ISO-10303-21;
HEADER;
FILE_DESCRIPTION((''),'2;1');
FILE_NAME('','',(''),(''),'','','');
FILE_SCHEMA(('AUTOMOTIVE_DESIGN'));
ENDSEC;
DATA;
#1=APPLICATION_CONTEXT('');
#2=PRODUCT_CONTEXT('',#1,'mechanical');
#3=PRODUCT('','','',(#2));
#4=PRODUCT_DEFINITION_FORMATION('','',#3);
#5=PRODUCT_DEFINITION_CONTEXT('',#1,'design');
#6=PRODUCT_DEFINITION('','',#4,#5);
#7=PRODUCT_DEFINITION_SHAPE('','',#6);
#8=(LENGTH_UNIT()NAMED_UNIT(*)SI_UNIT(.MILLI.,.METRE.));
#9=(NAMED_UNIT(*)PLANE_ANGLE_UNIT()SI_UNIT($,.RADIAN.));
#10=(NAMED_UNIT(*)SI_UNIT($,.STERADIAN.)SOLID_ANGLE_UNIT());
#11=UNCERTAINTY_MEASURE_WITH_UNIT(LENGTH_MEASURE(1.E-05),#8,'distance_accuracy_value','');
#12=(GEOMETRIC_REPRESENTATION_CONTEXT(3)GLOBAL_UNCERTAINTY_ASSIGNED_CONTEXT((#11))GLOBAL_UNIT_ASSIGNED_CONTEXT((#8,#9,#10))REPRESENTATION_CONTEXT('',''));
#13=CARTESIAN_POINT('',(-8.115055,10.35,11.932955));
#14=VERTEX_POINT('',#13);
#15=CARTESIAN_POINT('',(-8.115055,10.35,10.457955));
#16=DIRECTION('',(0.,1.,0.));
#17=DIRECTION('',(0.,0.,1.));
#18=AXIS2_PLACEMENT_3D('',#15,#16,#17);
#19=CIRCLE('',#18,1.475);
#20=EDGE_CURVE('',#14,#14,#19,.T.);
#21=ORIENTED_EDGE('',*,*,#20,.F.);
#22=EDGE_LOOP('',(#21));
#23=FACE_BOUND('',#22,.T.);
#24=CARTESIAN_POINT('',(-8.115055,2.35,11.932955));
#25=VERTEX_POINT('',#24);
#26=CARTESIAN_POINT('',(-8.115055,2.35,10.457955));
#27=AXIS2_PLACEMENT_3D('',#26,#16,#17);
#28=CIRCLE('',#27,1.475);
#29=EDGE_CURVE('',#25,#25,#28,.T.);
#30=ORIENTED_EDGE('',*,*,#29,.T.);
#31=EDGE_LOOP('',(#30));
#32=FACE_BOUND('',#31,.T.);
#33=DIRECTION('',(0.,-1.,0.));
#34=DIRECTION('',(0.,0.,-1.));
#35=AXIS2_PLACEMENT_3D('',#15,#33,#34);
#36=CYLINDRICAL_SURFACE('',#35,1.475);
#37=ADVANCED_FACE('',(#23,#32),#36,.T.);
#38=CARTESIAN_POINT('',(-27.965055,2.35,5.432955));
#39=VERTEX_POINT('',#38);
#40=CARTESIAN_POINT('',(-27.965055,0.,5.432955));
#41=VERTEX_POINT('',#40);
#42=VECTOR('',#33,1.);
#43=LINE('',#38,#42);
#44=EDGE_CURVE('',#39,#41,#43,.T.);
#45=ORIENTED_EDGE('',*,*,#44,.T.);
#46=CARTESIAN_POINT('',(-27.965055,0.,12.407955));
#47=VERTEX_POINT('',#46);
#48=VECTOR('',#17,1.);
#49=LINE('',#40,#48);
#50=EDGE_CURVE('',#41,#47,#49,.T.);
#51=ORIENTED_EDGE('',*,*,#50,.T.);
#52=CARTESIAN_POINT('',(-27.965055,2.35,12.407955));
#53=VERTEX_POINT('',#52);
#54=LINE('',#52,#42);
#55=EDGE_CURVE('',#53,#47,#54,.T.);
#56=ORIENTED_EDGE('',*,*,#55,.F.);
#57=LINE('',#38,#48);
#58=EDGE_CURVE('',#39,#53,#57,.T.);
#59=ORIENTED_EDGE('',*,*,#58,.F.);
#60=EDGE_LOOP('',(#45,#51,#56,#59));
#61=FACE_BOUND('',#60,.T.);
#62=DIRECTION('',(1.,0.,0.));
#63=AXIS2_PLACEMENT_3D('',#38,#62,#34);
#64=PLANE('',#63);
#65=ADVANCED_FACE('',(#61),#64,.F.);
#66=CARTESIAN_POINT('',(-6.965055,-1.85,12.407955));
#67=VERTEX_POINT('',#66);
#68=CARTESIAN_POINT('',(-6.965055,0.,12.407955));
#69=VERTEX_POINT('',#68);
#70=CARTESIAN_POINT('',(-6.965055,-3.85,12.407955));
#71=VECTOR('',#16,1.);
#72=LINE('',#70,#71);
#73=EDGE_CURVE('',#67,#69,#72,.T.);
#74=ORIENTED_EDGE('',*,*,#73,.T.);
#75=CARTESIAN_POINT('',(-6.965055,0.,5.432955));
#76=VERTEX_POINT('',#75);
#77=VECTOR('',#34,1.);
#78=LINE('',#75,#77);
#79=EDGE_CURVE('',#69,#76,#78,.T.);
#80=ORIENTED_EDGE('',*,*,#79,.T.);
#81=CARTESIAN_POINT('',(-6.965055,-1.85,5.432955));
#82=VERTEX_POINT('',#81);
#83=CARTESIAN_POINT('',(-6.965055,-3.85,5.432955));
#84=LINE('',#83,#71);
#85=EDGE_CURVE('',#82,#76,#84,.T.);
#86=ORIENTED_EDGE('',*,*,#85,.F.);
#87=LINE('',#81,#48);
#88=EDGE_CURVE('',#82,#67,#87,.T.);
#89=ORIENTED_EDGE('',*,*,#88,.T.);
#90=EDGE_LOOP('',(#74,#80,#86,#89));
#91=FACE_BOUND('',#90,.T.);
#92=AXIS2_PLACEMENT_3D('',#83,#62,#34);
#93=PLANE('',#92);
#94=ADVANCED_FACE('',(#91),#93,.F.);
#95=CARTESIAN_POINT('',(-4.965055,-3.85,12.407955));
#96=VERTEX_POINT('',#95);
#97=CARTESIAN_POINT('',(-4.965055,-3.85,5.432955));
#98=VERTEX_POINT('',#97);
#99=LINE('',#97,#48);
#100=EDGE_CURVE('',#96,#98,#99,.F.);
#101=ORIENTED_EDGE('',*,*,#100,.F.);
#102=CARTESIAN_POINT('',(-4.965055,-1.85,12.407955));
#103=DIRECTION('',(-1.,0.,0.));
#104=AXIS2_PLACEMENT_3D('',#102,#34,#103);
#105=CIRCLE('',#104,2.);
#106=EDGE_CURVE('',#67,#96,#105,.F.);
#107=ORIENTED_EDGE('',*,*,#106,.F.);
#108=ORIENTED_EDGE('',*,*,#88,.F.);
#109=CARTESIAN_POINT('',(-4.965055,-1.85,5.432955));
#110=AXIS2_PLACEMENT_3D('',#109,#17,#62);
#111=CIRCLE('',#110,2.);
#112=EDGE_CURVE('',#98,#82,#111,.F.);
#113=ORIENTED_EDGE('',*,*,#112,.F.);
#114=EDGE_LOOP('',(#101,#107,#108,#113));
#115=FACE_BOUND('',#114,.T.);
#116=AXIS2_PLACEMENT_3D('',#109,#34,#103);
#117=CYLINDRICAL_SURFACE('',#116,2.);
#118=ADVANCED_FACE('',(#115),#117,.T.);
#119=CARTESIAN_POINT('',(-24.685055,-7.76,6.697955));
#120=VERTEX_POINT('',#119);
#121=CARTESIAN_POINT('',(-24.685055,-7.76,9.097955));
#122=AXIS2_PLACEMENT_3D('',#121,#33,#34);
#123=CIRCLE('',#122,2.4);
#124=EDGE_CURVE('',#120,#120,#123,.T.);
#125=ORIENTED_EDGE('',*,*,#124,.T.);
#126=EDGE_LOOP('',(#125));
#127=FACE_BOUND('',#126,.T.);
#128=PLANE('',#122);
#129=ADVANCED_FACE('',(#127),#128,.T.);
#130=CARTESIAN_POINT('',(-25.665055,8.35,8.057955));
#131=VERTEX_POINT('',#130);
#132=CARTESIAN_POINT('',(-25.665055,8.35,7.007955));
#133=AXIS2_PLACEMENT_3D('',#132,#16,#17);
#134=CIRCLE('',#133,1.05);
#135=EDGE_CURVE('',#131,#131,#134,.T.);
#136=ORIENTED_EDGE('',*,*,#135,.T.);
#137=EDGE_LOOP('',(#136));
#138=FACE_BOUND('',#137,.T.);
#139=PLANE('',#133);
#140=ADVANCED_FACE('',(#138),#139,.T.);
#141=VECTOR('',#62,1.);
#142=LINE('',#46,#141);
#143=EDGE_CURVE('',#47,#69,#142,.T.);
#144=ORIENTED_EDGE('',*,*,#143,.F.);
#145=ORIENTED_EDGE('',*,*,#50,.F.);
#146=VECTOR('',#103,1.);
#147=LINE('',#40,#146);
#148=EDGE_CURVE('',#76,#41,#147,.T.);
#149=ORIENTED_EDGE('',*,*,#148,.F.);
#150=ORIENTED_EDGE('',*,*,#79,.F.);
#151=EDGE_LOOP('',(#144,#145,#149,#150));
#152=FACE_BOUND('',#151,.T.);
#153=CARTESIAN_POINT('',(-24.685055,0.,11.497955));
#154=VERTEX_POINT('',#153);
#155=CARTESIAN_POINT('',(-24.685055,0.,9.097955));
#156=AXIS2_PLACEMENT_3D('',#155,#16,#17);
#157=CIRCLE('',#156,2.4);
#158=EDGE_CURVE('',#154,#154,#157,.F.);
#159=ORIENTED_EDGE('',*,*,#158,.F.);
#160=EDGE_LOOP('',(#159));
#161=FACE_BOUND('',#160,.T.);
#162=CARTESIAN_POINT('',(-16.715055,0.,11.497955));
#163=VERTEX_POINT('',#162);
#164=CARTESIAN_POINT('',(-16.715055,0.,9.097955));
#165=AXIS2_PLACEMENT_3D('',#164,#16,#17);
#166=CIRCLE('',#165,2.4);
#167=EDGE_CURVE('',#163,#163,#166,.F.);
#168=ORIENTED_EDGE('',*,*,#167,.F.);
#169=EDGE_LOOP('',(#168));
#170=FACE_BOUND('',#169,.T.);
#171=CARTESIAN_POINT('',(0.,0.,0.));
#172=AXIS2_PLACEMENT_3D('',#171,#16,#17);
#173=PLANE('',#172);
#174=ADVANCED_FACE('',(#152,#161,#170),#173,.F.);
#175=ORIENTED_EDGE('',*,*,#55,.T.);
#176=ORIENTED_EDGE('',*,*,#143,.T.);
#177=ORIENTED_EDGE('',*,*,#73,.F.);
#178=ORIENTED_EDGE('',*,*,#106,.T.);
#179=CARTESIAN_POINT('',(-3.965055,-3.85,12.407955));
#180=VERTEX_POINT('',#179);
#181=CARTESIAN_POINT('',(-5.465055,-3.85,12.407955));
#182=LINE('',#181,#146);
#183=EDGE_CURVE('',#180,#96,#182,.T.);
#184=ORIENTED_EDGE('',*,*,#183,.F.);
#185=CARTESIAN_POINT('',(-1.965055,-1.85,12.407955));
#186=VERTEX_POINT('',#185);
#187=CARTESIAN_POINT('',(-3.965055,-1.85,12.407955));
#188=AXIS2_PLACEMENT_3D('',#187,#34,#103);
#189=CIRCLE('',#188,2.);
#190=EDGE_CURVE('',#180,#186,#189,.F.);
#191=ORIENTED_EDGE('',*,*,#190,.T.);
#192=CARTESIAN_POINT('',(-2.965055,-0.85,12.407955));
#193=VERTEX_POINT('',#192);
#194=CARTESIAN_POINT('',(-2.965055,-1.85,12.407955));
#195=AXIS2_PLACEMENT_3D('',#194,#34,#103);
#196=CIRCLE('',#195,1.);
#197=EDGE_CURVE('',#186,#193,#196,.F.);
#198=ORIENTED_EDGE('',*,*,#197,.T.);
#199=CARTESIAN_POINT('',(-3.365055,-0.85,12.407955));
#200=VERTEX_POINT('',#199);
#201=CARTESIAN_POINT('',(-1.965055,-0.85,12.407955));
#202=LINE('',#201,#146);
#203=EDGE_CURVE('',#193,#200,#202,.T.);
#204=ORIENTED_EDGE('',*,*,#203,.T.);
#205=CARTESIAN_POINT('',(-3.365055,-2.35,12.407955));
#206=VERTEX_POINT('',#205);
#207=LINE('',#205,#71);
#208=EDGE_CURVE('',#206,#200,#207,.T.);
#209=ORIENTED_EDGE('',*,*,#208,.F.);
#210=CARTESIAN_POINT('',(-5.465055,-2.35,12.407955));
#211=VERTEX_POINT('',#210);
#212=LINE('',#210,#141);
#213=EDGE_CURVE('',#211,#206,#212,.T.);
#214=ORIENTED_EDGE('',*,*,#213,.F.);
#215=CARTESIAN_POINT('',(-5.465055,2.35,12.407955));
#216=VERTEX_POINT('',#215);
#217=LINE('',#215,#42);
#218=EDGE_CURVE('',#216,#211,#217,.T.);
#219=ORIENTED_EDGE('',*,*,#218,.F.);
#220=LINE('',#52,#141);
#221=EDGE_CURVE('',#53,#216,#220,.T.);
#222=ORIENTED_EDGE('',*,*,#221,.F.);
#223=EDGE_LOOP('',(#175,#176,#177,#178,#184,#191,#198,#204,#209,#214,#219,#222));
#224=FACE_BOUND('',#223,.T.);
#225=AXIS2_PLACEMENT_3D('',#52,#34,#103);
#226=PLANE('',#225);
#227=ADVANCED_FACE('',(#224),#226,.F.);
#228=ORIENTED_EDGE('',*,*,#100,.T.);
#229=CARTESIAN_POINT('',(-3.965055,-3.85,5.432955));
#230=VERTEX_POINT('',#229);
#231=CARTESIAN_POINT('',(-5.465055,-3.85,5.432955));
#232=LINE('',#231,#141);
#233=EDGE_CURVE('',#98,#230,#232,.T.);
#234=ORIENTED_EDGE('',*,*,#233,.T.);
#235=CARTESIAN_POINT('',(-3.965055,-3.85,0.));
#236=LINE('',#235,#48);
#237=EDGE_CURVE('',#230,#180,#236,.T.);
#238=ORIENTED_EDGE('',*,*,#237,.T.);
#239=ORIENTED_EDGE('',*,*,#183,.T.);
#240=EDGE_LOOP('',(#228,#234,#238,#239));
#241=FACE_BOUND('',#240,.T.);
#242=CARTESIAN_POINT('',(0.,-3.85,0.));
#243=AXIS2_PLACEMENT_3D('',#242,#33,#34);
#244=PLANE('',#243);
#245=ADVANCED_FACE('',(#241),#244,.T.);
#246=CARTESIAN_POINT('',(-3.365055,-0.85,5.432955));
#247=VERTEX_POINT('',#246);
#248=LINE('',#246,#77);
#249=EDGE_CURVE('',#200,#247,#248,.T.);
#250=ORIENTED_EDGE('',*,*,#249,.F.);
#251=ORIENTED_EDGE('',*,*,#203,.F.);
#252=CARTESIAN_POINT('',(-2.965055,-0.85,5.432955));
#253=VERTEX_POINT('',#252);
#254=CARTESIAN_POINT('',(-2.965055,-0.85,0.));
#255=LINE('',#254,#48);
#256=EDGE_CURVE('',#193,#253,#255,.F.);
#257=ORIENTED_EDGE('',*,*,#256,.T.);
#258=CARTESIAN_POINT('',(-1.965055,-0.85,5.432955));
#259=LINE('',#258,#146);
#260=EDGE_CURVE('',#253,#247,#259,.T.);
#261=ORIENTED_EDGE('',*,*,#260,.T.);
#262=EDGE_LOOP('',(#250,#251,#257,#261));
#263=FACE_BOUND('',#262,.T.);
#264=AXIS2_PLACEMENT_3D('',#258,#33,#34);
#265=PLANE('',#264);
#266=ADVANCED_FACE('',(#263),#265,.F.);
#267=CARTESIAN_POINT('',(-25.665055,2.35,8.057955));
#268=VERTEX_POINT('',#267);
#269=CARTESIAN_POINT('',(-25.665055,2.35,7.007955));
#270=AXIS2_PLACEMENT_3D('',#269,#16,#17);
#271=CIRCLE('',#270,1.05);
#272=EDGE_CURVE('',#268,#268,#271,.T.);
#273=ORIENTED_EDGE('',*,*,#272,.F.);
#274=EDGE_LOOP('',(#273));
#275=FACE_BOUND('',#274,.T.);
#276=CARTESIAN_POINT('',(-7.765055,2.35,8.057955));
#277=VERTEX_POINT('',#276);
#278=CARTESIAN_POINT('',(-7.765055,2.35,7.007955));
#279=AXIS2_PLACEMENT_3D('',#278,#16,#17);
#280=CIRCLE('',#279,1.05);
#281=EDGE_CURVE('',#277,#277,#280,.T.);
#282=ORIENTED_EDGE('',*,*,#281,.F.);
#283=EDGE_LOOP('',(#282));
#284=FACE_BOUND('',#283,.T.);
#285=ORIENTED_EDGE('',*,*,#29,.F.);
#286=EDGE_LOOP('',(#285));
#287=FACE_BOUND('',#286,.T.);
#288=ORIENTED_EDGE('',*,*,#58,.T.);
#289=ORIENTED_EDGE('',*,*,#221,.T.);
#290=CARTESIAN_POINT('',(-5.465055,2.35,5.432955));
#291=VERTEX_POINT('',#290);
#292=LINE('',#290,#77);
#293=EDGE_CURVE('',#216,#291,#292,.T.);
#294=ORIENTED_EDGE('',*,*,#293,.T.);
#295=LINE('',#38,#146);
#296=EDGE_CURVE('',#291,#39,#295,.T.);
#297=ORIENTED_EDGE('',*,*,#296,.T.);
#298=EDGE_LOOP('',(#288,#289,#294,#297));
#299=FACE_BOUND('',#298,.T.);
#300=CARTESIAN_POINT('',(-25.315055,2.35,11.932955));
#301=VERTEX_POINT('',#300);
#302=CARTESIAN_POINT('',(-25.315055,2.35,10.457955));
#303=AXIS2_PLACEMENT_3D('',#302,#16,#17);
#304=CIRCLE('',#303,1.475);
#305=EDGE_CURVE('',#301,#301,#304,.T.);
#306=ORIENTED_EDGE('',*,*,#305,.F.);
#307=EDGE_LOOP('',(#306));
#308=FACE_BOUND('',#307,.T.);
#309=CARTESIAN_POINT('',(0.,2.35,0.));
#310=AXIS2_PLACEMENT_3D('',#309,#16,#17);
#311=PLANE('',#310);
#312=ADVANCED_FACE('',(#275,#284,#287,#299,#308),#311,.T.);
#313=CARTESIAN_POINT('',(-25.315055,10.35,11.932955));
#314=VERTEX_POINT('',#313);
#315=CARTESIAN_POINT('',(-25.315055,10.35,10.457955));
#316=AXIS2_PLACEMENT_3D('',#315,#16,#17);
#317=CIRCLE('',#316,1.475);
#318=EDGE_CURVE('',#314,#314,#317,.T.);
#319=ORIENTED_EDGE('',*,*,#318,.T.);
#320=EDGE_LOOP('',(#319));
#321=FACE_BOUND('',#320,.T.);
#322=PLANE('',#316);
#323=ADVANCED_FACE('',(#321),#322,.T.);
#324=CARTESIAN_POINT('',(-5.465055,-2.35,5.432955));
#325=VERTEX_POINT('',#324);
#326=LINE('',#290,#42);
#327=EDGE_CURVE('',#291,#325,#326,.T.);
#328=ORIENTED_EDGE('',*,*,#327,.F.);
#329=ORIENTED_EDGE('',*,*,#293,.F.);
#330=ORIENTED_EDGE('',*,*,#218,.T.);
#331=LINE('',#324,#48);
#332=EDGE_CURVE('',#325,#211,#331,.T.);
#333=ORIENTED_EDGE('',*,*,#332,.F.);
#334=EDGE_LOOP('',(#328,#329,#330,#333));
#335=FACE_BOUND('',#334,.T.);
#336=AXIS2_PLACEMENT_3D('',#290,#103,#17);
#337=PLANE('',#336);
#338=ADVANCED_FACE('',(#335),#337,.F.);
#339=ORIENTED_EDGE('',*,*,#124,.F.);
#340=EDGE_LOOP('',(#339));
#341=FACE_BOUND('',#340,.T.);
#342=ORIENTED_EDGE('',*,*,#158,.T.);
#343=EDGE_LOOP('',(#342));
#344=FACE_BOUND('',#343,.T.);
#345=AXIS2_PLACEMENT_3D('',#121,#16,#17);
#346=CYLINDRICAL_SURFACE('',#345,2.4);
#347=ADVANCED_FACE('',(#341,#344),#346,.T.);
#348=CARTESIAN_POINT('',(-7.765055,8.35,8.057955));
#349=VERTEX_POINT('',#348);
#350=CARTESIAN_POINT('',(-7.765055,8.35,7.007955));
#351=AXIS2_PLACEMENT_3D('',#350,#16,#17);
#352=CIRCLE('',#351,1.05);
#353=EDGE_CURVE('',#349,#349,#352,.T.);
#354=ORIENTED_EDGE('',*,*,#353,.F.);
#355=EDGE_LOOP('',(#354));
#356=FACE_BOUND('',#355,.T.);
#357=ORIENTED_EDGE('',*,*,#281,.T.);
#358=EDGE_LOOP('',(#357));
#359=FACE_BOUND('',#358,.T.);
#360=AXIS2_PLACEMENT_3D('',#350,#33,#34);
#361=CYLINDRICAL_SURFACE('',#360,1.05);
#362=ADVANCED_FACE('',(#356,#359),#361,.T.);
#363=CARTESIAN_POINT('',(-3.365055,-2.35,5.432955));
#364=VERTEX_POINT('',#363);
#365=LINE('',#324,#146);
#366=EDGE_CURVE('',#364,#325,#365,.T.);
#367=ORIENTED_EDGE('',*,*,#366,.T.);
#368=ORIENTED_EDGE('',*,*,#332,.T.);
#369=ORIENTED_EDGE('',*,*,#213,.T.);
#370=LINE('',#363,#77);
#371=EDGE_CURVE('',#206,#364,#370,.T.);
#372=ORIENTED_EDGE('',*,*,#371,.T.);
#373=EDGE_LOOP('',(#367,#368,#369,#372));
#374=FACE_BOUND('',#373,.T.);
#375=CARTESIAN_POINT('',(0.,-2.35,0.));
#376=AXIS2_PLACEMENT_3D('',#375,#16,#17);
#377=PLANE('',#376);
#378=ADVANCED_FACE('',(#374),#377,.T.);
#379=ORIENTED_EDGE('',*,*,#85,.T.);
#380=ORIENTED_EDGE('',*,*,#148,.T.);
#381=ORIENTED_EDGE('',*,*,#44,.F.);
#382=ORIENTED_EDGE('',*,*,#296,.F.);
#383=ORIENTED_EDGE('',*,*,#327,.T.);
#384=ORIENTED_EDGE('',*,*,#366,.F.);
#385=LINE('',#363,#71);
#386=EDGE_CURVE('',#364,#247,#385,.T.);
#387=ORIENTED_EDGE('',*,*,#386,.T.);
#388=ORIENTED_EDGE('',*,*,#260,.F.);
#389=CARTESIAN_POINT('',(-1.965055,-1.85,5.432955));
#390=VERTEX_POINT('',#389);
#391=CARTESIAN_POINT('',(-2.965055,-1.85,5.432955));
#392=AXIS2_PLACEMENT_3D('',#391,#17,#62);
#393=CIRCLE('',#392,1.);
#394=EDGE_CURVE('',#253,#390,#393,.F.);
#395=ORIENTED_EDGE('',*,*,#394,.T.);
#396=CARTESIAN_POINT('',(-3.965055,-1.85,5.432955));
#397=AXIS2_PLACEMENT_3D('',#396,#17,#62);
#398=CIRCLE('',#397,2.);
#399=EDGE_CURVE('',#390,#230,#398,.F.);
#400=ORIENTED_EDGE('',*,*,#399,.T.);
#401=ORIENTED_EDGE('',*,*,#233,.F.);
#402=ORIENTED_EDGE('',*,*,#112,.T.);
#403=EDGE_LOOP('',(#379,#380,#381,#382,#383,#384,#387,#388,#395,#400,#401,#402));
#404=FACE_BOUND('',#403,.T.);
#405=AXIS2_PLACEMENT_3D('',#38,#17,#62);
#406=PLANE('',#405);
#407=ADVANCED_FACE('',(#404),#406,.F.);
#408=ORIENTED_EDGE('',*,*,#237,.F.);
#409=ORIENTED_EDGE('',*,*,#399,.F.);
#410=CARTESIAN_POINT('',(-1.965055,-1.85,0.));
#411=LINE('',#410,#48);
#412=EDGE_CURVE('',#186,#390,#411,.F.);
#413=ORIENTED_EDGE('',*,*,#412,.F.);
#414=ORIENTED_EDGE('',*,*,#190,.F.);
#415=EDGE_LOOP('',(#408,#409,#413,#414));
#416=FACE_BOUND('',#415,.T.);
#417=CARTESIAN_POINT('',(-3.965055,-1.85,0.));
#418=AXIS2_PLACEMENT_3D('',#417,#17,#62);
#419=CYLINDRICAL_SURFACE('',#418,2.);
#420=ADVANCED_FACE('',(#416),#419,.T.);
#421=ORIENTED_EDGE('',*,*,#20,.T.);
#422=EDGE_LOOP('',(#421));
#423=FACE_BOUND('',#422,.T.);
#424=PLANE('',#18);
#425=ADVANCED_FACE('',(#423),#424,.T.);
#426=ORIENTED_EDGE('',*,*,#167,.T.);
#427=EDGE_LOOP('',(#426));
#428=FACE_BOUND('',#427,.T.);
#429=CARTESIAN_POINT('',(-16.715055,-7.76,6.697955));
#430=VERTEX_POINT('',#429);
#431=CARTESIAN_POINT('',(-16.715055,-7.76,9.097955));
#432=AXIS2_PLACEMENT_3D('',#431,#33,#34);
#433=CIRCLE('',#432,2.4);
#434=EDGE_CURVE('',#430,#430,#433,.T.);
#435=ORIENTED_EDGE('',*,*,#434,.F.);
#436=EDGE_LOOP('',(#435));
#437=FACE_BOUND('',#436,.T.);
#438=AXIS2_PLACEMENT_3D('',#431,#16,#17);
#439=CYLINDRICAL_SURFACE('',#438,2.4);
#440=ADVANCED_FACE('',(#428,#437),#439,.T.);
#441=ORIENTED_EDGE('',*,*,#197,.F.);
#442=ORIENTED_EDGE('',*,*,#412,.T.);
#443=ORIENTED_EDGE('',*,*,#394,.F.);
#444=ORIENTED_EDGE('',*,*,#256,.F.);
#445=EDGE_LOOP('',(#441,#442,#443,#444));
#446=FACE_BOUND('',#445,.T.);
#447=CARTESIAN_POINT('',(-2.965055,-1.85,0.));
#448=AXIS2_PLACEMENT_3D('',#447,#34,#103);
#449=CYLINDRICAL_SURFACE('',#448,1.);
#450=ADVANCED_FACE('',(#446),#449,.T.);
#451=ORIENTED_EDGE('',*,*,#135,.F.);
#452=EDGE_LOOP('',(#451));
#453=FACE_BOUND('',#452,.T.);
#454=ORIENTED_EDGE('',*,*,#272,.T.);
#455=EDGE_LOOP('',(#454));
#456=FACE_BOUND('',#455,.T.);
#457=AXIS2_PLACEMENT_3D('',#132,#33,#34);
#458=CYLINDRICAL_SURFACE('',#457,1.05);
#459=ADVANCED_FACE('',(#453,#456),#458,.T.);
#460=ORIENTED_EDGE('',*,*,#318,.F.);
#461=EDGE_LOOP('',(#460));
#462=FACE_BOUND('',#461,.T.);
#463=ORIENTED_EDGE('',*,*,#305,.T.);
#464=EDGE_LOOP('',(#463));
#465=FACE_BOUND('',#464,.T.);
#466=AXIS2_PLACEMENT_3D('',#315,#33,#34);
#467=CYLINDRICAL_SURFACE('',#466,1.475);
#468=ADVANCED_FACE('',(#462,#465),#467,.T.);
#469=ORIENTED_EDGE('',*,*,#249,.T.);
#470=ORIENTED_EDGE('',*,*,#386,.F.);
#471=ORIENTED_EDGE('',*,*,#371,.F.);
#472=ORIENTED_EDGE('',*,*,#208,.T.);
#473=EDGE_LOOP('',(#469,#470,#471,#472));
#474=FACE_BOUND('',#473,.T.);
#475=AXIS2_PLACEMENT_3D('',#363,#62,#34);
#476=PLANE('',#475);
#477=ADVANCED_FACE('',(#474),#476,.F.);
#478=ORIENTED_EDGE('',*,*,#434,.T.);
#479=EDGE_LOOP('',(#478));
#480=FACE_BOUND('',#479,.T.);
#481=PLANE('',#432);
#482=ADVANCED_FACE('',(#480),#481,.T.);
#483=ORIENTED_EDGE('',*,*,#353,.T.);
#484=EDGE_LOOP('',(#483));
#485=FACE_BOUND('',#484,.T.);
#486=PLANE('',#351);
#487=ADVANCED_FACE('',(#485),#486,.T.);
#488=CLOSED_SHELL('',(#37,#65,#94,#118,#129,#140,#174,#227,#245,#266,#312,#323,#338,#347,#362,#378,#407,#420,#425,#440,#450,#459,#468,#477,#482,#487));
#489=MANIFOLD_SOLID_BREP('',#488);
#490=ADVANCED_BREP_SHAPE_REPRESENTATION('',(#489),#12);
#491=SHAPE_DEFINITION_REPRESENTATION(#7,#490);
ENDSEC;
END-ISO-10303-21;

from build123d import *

# Parameters (mm, degrees)
SKETCH1_W           = 22.5
SKETCH1_H           = 6.975
BOSS_EXTRUDE1_DEPTH = 2.35
SKETCH2_R           = 1.475
BOSS_EXTRUDE2_DEPTH = 8
SKETCH3_W           = 1.5
SKETCH3_H           = 6.975
BOSS_EXTRUDE3_DEPTH = 3.85
SKETCH4_W           = 6.975
SKETCH4_H           = 3
BOSS_EXTRUDE4_DEPTH = 3.5
SKETCH5_W           = 2.1
SKETCH5_H           = 6.975
CUT_EXTRUDE1_DEPTH  = 1.5
SKETCH6_R           = 1.05
BOSS_EXTRUDE5_DEPTH = 6
SKETCH7_R           = 2.4
BOSS_EXTRUDE9_DEPTH = 7.76
FILLET1_R           = 2
FILLET2_R           = 2
FILLET3_R           = 1


with BuildPart() as part:
    # Sketch1 → Boss-Extrude1 (new body)
    with BuildSketch(Plane(origin=(0, 0, 0), x_dir=(1, 0, 0), z_dir=(0, 1, 0))):
        with Locations((-16.71505467, -8.920455339)):
            Rectangle(SKETCH1_W, SKETCH1_H)
    extrude(amount=BOSS_EXTRUDE1_DEPTH)

    # Sketch2 → Boss-Extrude2 (add)
    with BuildSketch(Plane(origin=(0, 2.35, 0), x_dir=(1, 0, 0), z_dir=(0, 1, 0))):
        with Locations(Location((-25.31505467, -10.457955339, 0), (0, 0, 270))):
            Circle(SKETCH2_R)
        with Locations(Location((-8.11505467, -10.457955339, 0), (0, 0, 270))):
            Circle(SKETCH2_R)
    extrude(amount=BOSS_EXTRUDE2_DEPTH)

    # Sketch3 → Boss-Extrude3 (add)
    with BuildSketch(Plane(origin=(0, 0, 0), x_dir=(-1, 0, 0), z_dir=(0, -1, 0))):
        with Locations((6.21505467, -8.920455339)):
            Rectangle(SKETCH3_W, SKETCH3_H)
    extrude(amount=BOSS_EXTRUDE3_DEPTH)

    # Sketch4 → Boss-Extrude4 (add)
    with BuildSketch(Plane(origin=(-5.46505467, 0, 0), x_dir=(0, 0, -1), z_dir=(1, 0, 0))):
        with Locations((-8.920455339, -2.35)):
            Rectangle(SKETCH4_W, SKETCH4_H)
    extrude(amount=BOSS_EXTRUDE4_DEPTH)

    # Sketch5 → Cut-Extrude1 (cut)
    with BuildSketch(Plane(origin=(0, -0.85, 0), x_dir=(1, 0, 0), z_dir=(0, 1, 0))):
        with Locations((-4.41505467, -8.920455339)):
            Rectangle(SKETCH5_W, SKETCH5_H)
    extrude(amount=-CUT_EXTRUDE1_DEPTH, mode=Mode.SUBTRACT)

    # Sketch6 → Boss-Extrude5 (add)
    with BuildSketch(Plane(origin=(0, 2.35, 0), x_dir=(1, 0, 0), z_dir=(0, 1, 0))):
        with Locations(Location((-7.76505467, -7.007955339, 0), (0, 0, 270))):
            Circle(SKETCH6_R)
        with Locations(Location((-25.66505467, -7.007955339, 0), (0, 0, 270))):
            Circle(SKETCH6_R)
    extrude(amount=BOSS_EXTRUDE5_DEPTH)

    # Sketch7 → Boss-Extrude9 (add)
    with BuildSketch(Plane(origin=(0, 0, 0), x_dir=(-1, 0, 0), z_dir=(0, -1, 0))):
        with Locations(Location((16.71505467, -9.097955339, 0), (0, 0, 270))):
            Circle(SKETCH7_R)
        with Locations(Location((24.68505467, -9.097955339, 0), (0, 0, 270))):
            Circle(SKETCH7_R)
    extrude(amount=BOSS_EXTRUDE9_DEPTH)

    # Fillet1
    fillet1_edges = [part.edges().sort_by_distance(p)[0] for p in [
        (-6.96505467, -3.85, 8.920455339),
    ]]
    fillet(fillet1_edges, radius=FILLET1_R)

    # Fillet2
    fillet2_edges = [part.edges().sort_by_distance(p)[0] for p in [
        (-1.96505467, -3.85, 8.920455339),
    ]]
    fillet(fillet2_edges, radius=FILLET2_R)

    # Fillet3
    fillet3_edges = [part.edges().sort_by_distance(p)[0] for p in [
        (-1.96505467, -0.85, 8.920455339),
    ]]
    fillet(fillet3_edges, radius=FILLET3_R - 0.0001)  # a hair under: the kernel refuses the full size


solid = part.part
